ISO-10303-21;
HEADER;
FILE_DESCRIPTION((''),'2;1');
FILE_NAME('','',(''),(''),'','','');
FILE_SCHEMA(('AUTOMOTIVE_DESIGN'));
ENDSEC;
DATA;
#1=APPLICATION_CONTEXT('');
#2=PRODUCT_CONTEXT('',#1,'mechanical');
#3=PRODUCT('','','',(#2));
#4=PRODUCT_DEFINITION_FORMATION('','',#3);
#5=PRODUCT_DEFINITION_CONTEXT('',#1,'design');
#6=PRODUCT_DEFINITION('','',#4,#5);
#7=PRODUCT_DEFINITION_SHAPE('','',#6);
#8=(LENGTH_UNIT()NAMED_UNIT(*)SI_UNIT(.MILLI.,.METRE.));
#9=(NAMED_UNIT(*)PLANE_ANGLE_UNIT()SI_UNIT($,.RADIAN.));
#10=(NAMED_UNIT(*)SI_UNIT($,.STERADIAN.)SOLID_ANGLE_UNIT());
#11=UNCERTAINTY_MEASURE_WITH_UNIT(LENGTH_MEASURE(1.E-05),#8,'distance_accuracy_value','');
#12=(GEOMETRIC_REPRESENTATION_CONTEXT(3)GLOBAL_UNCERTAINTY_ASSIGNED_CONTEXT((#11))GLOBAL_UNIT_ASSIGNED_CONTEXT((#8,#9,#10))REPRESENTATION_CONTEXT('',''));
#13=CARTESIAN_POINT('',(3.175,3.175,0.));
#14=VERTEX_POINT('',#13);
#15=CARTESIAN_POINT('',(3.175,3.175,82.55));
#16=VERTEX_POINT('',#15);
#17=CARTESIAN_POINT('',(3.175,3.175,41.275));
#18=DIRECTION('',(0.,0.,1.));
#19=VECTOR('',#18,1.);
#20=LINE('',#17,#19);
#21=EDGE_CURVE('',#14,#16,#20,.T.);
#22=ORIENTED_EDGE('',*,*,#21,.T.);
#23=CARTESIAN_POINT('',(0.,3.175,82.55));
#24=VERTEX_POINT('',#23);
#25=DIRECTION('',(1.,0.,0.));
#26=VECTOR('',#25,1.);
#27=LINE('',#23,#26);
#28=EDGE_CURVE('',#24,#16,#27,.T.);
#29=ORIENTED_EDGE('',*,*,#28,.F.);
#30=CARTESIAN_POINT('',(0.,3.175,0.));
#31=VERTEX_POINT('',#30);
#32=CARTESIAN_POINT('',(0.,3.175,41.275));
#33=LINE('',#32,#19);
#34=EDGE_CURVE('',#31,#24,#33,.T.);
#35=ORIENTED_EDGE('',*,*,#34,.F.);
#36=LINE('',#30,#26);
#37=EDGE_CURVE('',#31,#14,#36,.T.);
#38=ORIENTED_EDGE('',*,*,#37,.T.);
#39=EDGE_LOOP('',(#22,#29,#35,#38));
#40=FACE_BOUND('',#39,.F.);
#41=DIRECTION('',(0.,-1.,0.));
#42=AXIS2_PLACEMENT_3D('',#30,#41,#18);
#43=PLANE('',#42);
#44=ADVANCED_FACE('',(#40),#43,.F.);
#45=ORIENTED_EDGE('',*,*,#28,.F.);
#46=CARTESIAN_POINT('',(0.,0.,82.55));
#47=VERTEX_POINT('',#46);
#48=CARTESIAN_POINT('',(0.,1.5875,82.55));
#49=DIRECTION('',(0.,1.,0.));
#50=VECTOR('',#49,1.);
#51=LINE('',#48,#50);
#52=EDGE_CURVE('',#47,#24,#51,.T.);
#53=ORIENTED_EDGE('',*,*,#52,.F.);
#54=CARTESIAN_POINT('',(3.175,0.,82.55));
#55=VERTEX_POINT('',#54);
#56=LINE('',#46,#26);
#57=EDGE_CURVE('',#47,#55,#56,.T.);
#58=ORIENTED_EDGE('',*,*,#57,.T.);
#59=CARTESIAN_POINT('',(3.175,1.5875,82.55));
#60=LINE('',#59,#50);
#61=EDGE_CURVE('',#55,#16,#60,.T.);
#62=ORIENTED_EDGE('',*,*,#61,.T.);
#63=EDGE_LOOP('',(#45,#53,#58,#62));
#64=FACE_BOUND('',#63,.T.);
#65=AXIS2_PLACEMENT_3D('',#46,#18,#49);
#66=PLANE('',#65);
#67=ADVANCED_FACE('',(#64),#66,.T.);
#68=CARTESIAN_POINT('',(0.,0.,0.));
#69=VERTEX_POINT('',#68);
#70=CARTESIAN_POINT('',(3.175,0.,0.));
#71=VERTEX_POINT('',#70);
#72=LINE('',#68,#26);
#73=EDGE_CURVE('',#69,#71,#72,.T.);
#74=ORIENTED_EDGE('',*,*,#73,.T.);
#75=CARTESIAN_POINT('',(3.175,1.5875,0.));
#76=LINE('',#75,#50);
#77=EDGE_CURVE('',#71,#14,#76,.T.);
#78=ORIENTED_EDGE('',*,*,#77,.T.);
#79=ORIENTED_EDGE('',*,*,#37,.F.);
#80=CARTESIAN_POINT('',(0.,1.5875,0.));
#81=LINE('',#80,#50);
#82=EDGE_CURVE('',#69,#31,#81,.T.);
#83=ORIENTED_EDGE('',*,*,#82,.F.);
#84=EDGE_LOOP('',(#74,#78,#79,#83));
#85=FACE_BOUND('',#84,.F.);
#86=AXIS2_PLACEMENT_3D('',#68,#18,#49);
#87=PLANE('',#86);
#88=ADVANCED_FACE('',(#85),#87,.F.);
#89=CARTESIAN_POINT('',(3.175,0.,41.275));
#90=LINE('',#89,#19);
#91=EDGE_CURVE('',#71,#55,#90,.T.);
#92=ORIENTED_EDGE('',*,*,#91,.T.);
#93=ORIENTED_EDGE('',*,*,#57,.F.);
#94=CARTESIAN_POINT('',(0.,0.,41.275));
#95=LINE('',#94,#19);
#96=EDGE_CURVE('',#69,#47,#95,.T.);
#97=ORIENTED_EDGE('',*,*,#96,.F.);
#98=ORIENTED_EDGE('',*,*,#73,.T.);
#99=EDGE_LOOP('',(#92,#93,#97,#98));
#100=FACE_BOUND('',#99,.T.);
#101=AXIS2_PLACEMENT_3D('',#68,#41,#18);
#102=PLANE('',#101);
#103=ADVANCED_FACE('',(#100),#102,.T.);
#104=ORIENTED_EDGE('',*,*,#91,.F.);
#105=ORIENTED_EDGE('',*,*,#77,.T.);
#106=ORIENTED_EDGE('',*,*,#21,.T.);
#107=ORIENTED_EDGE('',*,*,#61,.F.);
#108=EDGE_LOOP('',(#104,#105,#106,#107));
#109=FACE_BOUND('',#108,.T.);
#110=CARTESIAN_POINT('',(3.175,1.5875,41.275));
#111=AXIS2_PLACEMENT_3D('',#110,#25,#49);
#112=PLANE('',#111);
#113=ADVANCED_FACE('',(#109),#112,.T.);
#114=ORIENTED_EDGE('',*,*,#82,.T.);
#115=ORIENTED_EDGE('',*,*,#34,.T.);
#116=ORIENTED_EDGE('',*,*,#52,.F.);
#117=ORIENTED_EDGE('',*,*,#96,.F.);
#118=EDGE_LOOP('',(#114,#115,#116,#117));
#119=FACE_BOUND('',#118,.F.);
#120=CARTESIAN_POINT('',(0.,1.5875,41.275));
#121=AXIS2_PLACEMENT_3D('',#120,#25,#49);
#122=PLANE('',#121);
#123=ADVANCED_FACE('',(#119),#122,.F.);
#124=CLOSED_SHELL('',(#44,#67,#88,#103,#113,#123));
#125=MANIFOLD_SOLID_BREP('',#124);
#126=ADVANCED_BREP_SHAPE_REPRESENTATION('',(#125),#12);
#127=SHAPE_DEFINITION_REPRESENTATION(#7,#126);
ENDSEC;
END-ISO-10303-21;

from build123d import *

# Parameters (mm, degrees)
F0_W     = 3.175
F0_H     = 82.55
F1_DEPTH = 3.175


# Not quite as in the source:
# - a feature names something its author has since deleted; it is built from what else it names


with BuildPart() as f1:
    # F0 (on Right) → F1 (new body)
    with BuildSketch(Plane.YZ):
        with Locations((1.5875, 41.275)):
            Rectangle(F0_W, F0_H)
    extrude(amount=F1_DEPTH)


solid = f1.part
